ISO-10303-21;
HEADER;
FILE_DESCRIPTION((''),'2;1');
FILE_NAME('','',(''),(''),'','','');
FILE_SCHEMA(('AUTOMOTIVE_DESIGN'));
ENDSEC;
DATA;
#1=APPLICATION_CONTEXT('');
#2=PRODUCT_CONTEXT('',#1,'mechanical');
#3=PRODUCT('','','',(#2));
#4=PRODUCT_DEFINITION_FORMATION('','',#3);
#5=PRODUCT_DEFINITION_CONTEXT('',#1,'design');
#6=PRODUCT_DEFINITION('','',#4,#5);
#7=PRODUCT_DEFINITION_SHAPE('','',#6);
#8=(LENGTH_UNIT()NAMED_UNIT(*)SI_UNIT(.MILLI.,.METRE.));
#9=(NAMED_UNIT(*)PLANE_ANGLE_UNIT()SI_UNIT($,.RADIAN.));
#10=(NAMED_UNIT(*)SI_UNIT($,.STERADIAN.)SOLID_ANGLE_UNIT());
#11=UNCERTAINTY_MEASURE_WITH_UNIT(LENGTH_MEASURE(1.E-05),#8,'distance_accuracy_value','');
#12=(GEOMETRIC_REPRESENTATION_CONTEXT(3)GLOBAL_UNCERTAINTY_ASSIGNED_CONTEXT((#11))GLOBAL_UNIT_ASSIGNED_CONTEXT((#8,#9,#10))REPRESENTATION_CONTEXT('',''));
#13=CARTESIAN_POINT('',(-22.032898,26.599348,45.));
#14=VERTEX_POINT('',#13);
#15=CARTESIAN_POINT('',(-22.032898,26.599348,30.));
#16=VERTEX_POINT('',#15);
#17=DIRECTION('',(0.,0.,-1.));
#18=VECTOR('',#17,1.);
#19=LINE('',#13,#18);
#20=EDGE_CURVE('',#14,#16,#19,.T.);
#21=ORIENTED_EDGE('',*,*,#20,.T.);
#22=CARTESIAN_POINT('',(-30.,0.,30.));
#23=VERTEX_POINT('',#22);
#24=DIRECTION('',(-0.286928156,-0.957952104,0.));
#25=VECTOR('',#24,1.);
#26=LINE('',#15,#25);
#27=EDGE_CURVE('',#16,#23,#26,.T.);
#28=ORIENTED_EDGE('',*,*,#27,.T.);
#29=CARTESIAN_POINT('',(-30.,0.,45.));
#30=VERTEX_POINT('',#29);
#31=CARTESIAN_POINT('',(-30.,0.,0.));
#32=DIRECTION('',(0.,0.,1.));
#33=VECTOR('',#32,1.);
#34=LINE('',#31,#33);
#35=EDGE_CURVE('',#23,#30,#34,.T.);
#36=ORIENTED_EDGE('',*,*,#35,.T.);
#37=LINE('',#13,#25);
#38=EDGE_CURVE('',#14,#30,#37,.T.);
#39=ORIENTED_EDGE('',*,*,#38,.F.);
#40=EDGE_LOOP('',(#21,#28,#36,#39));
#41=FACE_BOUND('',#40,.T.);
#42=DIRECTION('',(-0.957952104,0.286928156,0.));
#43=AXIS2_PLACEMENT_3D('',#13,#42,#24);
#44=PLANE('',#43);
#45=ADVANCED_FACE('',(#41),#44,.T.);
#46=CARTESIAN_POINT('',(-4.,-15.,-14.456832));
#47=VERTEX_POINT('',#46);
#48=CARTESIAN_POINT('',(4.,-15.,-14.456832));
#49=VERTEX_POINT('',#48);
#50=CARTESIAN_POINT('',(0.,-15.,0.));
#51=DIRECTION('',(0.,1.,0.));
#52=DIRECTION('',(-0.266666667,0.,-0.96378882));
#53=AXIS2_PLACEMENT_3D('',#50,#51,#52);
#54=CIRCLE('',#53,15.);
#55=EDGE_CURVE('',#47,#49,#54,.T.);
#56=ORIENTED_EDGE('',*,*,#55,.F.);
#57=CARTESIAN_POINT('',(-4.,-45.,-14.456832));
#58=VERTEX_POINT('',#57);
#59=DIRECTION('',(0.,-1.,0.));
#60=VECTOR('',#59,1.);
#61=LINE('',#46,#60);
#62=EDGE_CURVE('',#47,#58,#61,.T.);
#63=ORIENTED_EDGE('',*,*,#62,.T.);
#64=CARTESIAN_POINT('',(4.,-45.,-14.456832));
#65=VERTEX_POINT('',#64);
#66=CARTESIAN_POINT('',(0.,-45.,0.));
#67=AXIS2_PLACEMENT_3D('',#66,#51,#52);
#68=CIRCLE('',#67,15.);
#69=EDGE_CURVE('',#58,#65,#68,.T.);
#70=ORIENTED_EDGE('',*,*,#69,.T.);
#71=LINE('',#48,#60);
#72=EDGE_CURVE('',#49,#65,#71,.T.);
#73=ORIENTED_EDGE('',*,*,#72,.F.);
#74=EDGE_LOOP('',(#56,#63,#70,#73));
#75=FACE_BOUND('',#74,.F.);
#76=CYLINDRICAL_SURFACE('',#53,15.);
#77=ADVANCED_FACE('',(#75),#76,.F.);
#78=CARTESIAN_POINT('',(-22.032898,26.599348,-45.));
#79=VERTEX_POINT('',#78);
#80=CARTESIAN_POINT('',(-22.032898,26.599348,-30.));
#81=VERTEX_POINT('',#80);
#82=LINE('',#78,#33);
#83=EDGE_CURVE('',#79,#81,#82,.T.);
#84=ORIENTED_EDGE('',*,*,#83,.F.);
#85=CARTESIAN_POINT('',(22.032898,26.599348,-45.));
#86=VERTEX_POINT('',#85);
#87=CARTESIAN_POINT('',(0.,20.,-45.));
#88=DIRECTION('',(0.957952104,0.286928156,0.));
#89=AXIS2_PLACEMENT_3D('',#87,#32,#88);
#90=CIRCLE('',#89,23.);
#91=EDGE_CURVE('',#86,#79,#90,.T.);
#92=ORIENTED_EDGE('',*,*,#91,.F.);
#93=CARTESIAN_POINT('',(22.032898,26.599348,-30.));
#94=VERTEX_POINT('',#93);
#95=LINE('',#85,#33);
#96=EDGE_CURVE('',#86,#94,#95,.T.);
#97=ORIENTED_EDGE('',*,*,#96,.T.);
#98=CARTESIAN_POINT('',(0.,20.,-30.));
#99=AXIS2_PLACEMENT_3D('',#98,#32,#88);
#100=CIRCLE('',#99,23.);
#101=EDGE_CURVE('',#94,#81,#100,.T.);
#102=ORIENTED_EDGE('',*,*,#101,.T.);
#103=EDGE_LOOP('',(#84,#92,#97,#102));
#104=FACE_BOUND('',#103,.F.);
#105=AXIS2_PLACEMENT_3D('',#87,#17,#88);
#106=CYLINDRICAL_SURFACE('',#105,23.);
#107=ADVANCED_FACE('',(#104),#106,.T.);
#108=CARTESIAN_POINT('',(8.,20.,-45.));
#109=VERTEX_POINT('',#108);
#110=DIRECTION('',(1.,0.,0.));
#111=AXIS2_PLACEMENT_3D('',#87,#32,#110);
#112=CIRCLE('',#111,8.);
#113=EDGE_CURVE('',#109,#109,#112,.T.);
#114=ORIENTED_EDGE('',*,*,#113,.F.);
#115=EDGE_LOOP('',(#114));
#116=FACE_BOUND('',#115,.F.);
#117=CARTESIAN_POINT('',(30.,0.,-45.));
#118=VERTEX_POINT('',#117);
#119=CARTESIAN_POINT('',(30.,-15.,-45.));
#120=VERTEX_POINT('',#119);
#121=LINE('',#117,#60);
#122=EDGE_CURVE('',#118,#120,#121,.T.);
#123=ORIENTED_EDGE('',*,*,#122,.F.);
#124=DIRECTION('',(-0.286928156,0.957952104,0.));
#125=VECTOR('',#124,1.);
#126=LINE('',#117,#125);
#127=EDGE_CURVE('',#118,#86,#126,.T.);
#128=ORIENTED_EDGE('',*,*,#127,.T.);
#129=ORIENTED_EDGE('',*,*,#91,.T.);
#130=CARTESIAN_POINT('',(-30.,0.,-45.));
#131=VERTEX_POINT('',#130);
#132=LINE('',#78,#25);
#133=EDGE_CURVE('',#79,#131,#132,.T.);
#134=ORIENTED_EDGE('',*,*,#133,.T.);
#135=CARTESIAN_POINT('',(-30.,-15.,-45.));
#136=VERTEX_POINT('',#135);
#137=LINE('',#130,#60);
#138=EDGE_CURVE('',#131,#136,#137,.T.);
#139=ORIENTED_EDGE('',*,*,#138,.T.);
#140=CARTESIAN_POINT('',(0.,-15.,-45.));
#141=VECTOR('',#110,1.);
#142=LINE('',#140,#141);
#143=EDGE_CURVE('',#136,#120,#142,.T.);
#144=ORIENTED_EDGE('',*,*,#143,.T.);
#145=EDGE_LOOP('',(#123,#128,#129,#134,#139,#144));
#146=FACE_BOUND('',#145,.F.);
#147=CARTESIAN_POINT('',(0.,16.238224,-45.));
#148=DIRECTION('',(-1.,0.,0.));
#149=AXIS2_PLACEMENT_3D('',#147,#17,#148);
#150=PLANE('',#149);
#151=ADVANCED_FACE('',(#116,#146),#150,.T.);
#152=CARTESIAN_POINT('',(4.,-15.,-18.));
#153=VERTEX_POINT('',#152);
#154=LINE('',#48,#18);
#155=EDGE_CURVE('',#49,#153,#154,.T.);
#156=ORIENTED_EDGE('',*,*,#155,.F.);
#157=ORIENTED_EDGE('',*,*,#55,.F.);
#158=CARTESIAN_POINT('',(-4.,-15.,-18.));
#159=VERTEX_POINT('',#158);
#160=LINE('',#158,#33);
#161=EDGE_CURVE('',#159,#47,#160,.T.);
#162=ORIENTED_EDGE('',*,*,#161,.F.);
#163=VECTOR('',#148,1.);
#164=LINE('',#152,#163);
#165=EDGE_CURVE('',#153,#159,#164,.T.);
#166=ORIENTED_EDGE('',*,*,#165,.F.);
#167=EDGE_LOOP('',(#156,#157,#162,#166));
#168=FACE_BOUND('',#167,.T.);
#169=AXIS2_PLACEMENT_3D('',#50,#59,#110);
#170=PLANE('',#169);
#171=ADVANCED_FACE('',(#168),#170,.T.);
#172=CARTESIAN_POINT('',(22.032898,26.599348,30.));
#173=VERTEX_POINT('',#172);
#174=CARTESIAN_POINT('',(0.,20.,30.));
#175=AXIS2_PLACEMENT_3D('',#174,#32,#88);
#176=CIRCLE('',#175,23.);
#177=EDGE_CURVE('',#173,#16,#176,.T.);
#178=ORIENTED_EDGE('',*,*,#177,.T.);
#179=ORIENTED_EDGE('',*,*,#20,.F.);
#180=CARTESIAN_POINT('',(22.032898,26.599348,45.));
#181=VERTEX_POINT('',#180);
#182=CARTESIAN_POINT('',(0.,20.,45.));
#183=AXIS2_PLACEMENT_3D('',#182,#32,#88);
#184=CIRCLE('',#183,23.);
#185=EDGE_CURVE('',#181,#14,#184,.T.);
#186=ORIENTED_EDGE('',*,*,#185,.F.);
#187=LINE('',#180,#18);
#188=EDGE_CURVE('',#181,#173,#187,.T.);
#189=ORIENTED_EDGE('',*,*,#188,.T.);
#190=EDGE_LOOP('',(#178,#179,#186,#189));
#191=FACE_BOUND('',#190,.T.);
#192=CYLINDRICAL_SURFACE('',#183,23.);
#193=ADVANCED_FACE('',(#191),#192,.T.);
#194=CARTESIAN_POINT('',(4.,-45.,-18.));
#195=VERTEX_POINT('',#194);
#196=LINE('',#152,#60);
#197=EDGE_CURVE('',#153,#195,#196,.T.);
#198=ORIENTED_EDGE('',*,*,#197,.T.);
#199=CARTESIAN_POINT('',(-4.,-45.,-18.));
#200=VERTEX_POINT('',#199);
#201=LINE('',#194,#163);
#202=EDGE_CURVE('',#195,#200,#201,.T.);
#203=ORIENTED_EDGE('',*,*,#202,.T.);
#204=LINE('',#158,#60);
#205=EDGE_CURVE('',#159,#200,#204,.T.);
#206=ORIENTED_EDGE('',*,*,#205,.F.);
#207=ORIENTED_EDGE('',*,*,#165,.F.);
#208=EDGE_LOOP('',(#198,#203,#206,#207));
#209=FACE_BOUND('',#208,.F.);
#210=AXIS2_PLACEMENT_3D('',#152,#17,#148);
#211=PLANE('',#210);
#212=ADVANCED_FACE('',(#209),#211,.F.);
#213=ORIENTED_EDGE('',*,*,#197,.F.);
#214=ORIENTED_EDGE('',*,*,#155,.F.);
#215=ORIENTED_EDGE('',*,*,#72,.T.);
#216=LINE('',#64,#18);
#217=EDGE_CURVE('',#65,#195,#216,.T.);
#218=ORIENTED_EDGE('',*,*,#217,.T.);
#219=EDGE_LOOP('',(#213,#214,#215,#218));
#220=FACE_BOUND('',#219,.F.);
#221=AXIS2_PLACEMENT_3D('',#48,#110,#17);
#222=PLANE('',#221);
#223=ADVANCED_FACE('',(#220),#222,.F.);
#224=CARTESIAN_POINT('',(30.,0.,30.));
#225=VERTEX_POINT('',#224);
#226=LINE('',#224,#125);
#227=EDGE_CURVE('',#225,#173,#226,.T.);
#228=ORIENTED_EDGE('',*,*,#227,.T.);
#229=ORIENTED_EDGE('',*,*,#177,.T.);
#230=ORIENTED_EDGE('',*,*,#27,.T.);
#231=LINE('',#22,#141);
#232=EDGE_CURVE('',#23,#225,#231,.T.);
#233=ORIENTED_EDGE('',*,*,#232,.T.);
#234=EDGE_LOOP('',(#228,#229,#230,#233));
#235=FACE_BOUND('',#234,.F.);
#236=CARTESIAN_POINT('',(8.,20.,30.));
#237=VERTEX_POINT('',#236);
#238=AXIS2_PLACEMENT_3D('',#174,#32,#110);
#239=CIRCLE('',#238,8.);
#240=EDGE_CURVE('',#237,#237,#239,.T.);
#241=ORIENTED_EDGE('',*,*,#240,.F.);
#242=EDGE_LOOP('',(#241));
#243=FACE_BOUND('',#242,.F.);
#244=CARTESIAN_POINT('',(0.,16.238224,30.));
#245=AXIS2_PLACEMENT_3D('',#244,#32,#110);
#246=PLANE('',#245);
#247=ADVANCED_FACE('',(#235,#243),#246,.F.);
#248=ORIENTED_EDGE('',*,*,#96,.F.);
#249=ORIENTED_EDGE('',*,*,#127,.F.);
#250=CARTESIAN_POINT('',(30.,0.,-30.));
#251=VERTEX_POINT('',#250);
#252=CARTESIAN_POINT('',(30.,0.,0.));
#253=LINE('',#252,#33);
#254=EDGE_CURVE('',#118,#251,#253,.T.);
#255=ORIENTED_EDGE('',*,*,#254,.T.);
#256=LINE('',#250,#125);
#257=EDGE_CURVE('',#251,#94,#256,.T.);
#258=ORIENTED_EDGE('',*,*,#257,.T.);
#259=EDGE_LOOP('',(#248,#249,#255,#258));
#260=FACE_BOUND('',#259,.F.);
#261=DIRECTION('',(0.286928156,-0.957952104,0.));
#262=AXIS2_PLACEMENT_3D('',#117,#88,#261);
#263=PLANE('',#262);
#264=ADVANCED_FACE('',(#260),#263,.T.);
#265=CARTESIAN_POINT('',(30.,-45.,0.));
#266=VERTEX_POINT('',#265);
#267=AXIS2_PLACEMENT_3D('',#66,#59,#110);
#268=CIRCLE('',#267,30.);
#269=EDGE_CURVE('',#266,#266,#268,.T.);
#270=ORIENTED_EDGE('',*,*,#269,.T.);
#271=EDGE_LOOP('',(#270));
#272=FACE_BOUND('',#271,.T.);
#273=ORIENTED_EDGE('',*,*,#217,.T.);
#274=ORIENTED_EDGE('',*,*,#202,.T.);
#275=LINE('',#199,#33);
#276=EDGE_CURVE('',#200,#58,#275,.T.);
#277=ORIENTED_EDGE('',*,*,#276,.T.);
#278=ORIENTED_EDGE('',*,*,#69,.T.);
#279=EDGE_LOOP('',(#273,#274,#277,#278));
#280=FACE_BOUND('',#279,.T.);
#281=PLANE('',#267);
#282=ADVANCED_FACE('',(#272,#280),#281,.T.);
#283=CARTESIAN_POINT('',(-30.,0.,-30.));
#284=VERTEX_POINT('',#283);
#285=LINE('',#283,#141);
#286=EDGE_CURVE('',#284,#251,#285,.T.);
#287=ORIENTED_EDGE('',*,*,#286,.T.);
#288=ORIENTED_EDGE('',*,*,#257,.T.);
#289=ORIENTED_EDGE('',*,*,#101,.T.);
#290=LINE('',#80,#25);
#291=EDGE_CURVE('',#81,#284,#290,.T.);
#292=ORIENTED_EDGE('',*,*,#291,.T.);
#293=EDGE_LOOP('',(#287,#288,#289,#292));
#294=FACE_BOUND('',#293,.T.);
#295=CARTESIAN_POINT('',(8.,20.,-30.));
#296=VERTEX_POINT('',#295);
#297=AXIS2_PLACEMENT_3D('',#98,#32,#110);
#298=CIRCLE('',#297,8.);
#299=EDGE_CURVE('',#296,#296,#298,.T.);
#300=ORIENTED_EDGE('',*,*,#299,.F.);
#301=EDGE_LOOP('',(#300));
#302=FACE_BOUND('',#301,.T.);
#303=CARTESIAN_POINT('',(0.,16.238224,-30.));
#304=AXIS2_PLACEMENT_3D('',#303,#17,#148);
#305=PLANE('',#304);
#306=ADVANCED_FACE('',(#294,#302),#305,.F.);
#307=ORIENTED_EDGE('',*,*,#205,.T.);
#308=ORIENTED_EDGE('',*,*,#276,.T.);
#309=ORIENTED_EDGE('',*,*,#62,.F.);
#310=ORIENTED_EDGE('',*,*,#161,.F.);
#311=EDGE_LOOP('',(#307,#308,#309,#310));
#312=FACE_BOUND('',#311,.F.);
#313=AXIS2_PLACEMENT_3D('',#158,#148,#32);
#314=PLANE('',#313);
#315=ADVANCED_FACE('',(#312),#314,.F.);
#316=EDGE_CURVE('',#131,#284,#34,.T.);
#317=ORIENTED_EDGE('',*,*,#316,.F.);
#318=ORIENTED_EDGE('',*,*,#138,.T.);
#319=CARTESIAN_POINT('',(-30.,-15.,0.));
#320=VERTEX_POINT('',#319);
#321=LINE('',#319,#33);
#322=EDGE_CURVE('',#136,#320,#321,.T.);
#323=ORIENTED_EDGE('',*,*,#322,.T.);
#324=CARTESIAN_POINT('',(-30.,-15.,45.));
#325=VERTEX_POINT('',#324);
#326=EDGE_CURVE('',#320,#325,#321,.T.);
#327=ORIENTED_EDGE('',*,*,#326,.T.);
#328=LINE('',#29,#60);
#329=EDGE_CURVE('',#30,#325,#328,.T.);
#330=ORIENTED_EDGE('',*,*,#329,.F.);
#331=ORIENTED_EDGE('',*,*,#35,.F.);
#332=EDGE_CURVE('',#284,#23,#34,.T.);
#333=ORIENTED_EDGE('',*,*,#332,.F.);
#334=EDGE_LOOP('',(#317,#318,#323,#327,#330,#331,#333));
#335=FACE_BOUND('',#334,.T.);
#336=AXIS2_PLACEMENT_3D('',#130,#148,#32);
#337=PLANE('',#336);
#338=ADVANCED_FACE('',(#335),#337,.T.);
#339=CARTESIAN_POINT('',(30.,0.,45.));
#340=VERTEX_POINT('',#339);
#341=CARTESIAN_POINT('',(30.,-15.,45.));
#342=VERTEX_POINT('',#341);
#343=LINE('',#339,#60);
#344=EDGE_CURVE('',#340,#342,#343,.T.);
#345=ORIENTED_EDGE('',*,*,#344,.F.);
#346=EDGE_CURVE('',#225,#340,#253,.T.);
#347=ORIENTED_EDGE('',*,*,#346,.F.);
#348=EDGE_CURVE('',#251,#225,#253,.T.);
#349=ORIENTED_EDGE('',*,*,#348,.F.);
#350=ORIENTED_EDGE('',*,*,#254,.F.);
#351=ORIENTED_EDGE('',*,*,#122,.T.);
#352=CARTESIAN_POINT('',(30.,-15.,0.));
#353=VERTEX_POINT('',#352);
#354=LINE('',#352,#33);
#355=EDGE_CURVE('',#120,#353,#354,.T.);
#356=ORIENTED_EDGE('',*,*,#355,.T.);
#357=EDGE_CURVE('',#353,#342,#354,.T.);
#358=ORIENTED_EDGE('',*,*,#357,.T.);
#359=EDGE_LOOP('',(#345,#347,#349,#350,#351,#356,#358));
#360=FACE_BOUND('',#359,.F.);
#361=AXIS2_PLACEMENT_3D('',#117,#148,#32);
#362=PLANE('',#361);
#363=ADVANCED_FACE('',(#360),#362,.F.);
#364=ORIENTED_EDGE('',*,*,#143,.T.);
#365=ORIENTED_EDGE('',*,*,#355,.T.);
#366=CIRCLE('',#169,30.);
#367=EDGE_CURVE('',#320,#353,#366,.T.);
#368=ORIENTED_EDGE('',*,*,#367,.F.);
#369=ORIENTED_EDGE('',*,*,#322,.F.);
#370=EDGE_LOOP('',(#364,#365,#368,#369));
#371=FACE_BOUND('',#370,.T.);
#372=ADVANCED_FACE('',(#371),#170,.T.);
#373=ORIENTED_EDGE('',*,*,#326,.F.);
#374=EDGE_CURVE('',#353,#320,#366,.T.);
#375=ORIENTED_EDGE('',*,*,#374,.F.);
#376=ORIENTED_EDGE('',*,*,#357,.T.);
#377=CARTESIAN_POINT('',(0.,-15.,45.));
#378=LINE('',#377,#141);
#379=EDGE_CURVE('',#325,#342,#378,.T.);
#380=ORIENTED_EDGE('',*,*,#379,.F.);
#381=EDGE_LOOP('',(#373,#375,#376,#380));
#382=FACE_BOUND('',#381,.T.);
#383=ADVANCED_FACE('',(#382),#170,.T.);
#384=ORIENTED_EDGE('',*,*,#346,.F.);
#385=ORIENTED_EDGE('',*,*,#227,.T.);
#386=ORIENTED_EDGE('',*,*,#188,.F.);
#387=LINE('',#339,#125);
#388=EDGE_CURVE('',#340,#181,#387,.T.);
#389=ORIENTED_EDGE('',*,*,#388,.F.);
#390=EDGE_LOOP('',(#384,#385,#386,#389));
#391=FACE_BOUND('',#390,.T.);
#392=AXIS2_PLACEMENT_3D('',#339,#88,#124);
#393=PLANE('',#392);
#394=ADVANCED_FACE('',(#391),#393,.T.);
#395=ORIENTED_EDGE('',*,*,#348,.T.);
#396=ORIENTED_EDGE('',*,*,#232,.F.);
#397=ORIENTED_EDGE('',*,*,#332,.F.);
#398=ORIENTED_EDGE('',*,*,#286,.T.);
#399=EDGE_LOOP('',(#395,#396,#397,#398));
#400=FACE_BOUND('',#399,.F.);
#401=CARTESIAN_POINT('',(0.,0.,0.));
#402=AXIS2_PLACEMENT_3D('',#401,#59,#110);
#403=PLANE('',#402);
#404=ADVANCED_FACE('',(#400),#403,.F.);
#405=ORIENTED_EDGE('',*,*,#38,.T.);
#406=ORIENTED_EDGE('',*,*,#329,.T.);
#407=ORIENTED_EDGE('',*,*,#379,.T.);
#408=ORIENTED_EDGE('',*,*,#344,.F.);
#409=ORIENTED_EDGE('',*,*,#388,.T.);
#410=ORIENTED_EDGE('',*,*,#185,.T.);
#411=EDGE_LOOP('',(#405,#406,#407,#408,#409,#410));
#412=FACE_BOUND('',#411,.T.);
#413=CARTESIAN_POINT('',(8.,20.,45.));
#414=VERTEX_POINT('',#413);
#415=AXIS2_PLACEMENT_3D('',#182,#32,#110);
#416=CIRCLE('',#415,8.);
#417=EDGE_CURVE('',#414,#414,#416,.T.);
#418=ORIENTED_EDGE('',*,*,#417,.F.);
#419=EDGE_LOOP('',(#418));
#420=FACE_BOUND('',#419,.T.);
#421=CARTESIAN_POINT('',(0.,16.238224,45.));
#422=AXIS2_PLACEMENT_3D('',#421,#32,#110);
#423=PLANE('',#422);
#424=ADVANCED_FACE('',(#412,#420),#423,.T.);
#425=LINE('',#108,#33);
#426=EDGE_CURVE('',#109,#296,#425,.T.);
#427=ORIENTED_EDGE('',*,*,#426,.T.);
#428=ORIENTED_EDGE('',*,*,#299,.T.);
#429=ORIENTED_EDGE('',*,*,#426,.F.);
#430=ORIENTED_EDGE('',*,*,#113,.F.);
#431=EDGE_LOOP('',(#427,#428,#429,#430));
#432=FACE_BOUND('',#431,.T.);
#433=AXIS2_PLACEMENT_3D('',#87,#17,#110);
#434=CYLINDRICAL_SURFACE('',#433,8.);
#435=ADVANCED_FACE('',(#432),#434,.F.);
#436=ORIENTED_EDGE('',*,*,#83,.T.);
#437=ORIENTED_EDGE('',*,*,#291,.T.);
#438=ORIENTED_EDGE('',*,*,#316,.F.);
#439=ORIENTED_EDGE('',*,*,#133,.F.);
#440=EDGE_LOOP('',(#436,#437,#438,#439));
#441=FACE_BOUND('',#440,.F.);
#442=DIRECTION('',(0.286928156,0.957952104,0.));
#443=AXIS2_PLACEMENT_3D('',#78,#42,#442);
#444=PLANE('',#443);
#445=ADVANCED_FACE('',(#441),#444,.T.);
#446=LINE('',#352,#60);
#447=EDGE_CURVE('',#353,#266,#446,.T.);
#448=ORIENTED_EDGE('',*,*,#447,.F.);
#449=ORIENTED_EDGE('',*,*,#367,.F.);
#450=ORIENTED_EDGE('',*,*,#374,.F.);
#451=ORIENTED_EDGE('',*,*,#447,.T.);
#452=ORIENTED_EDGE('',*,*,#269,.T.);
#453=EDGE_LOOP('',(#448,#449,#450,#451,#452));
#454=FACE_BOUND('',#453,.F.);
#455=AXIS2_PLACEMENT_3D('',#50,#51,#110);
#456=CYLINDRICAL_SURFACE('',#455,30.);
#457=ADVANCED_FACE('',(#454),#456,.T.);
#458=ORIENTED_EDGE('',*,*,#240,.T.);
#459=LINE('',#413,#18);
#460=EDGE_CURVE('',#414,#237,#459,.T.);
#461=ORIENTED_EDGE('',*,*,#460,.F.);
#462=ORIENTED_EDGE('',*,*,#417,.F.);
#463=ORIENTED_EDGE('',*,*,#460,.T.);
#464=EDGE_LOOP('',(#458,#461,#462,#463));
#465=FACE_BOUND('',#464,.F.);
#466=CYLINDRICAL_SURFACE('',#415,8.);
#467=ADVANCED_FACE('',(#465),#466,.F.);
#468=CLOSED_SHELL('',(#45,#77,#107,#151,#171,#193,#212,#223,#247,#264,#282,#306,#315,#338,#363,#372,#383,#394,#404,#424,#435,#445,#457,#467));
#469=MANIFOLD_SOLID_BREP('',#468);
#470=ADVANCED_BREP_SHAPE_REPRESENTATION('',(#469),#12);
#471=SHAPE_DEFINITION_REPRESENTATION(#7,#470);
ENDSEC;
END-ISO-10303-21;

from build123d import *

# Parameters (mm, degrees)
F0_W     = 60
F0_H     = 90
F1_DEPTH = 15
F2_R     = 30
F3_DEPTH = 30
F4_R     = 8
F5_DEPTH = 15


# Not quite as in the source:
# - a pattern or mirror of a feature is missing from the dataset's text; its kind, count and spacing are read off the source's solid


with BuildPart() as f1:
    # F0 (on Front) → F1 (new body)
    with BuildSketch(Plane.XZ):
        Rectangle(F0_W, F0_H)
    extrude(amount=F1_DEPTH)

    # F2 (on face) → F3 (join)
    with BuildSketch(Plane.XZ.offset(15)):
        Circle(F2_R)
        with BuildLine():
            ThreePointArc((-4, -14.4568322948), (0, 15), (4, -14.4568322948))
            Line((4, -14.4568322948), (4, -18))
            Line((4, -18), (0, -18))
            Line((0, -18), (-4, -18))
            Line((-4, -18), (-4, -14.4568322948))
        make_face(mode=Mode.SUBTRACT)
    extrude(amount=F3_DEPTH)

    # F4 (on face) → F5 (join)
    with BuildSketch(Plane.XY.offset(45)):
        with BuildLine():
            Line((30, 0), (22.0328983898, 26.5993475847))
            ThreePointArc((22.0328983898, 26.5993475847), (0, 43), (-22.0328983898, 26.5993475847))
            Line((-22.0328983898, 26.5993475847), (-30, 0))
            Line((-30, 0), (30, 0))
        make_face()
        with Locations((0, 20)):
            Circle(F4_R, mode=Mode.SUBTRACT)
    f5 = extrude(amount=-F5_DEPTH)

    # F5_copies: F5 across plane
    add(f5.mirror(Plane(origin=(0, 0, 0), x_dir=(-1, 0, 0), z_dir=(0, 0, -1))))


solid = f1.part
